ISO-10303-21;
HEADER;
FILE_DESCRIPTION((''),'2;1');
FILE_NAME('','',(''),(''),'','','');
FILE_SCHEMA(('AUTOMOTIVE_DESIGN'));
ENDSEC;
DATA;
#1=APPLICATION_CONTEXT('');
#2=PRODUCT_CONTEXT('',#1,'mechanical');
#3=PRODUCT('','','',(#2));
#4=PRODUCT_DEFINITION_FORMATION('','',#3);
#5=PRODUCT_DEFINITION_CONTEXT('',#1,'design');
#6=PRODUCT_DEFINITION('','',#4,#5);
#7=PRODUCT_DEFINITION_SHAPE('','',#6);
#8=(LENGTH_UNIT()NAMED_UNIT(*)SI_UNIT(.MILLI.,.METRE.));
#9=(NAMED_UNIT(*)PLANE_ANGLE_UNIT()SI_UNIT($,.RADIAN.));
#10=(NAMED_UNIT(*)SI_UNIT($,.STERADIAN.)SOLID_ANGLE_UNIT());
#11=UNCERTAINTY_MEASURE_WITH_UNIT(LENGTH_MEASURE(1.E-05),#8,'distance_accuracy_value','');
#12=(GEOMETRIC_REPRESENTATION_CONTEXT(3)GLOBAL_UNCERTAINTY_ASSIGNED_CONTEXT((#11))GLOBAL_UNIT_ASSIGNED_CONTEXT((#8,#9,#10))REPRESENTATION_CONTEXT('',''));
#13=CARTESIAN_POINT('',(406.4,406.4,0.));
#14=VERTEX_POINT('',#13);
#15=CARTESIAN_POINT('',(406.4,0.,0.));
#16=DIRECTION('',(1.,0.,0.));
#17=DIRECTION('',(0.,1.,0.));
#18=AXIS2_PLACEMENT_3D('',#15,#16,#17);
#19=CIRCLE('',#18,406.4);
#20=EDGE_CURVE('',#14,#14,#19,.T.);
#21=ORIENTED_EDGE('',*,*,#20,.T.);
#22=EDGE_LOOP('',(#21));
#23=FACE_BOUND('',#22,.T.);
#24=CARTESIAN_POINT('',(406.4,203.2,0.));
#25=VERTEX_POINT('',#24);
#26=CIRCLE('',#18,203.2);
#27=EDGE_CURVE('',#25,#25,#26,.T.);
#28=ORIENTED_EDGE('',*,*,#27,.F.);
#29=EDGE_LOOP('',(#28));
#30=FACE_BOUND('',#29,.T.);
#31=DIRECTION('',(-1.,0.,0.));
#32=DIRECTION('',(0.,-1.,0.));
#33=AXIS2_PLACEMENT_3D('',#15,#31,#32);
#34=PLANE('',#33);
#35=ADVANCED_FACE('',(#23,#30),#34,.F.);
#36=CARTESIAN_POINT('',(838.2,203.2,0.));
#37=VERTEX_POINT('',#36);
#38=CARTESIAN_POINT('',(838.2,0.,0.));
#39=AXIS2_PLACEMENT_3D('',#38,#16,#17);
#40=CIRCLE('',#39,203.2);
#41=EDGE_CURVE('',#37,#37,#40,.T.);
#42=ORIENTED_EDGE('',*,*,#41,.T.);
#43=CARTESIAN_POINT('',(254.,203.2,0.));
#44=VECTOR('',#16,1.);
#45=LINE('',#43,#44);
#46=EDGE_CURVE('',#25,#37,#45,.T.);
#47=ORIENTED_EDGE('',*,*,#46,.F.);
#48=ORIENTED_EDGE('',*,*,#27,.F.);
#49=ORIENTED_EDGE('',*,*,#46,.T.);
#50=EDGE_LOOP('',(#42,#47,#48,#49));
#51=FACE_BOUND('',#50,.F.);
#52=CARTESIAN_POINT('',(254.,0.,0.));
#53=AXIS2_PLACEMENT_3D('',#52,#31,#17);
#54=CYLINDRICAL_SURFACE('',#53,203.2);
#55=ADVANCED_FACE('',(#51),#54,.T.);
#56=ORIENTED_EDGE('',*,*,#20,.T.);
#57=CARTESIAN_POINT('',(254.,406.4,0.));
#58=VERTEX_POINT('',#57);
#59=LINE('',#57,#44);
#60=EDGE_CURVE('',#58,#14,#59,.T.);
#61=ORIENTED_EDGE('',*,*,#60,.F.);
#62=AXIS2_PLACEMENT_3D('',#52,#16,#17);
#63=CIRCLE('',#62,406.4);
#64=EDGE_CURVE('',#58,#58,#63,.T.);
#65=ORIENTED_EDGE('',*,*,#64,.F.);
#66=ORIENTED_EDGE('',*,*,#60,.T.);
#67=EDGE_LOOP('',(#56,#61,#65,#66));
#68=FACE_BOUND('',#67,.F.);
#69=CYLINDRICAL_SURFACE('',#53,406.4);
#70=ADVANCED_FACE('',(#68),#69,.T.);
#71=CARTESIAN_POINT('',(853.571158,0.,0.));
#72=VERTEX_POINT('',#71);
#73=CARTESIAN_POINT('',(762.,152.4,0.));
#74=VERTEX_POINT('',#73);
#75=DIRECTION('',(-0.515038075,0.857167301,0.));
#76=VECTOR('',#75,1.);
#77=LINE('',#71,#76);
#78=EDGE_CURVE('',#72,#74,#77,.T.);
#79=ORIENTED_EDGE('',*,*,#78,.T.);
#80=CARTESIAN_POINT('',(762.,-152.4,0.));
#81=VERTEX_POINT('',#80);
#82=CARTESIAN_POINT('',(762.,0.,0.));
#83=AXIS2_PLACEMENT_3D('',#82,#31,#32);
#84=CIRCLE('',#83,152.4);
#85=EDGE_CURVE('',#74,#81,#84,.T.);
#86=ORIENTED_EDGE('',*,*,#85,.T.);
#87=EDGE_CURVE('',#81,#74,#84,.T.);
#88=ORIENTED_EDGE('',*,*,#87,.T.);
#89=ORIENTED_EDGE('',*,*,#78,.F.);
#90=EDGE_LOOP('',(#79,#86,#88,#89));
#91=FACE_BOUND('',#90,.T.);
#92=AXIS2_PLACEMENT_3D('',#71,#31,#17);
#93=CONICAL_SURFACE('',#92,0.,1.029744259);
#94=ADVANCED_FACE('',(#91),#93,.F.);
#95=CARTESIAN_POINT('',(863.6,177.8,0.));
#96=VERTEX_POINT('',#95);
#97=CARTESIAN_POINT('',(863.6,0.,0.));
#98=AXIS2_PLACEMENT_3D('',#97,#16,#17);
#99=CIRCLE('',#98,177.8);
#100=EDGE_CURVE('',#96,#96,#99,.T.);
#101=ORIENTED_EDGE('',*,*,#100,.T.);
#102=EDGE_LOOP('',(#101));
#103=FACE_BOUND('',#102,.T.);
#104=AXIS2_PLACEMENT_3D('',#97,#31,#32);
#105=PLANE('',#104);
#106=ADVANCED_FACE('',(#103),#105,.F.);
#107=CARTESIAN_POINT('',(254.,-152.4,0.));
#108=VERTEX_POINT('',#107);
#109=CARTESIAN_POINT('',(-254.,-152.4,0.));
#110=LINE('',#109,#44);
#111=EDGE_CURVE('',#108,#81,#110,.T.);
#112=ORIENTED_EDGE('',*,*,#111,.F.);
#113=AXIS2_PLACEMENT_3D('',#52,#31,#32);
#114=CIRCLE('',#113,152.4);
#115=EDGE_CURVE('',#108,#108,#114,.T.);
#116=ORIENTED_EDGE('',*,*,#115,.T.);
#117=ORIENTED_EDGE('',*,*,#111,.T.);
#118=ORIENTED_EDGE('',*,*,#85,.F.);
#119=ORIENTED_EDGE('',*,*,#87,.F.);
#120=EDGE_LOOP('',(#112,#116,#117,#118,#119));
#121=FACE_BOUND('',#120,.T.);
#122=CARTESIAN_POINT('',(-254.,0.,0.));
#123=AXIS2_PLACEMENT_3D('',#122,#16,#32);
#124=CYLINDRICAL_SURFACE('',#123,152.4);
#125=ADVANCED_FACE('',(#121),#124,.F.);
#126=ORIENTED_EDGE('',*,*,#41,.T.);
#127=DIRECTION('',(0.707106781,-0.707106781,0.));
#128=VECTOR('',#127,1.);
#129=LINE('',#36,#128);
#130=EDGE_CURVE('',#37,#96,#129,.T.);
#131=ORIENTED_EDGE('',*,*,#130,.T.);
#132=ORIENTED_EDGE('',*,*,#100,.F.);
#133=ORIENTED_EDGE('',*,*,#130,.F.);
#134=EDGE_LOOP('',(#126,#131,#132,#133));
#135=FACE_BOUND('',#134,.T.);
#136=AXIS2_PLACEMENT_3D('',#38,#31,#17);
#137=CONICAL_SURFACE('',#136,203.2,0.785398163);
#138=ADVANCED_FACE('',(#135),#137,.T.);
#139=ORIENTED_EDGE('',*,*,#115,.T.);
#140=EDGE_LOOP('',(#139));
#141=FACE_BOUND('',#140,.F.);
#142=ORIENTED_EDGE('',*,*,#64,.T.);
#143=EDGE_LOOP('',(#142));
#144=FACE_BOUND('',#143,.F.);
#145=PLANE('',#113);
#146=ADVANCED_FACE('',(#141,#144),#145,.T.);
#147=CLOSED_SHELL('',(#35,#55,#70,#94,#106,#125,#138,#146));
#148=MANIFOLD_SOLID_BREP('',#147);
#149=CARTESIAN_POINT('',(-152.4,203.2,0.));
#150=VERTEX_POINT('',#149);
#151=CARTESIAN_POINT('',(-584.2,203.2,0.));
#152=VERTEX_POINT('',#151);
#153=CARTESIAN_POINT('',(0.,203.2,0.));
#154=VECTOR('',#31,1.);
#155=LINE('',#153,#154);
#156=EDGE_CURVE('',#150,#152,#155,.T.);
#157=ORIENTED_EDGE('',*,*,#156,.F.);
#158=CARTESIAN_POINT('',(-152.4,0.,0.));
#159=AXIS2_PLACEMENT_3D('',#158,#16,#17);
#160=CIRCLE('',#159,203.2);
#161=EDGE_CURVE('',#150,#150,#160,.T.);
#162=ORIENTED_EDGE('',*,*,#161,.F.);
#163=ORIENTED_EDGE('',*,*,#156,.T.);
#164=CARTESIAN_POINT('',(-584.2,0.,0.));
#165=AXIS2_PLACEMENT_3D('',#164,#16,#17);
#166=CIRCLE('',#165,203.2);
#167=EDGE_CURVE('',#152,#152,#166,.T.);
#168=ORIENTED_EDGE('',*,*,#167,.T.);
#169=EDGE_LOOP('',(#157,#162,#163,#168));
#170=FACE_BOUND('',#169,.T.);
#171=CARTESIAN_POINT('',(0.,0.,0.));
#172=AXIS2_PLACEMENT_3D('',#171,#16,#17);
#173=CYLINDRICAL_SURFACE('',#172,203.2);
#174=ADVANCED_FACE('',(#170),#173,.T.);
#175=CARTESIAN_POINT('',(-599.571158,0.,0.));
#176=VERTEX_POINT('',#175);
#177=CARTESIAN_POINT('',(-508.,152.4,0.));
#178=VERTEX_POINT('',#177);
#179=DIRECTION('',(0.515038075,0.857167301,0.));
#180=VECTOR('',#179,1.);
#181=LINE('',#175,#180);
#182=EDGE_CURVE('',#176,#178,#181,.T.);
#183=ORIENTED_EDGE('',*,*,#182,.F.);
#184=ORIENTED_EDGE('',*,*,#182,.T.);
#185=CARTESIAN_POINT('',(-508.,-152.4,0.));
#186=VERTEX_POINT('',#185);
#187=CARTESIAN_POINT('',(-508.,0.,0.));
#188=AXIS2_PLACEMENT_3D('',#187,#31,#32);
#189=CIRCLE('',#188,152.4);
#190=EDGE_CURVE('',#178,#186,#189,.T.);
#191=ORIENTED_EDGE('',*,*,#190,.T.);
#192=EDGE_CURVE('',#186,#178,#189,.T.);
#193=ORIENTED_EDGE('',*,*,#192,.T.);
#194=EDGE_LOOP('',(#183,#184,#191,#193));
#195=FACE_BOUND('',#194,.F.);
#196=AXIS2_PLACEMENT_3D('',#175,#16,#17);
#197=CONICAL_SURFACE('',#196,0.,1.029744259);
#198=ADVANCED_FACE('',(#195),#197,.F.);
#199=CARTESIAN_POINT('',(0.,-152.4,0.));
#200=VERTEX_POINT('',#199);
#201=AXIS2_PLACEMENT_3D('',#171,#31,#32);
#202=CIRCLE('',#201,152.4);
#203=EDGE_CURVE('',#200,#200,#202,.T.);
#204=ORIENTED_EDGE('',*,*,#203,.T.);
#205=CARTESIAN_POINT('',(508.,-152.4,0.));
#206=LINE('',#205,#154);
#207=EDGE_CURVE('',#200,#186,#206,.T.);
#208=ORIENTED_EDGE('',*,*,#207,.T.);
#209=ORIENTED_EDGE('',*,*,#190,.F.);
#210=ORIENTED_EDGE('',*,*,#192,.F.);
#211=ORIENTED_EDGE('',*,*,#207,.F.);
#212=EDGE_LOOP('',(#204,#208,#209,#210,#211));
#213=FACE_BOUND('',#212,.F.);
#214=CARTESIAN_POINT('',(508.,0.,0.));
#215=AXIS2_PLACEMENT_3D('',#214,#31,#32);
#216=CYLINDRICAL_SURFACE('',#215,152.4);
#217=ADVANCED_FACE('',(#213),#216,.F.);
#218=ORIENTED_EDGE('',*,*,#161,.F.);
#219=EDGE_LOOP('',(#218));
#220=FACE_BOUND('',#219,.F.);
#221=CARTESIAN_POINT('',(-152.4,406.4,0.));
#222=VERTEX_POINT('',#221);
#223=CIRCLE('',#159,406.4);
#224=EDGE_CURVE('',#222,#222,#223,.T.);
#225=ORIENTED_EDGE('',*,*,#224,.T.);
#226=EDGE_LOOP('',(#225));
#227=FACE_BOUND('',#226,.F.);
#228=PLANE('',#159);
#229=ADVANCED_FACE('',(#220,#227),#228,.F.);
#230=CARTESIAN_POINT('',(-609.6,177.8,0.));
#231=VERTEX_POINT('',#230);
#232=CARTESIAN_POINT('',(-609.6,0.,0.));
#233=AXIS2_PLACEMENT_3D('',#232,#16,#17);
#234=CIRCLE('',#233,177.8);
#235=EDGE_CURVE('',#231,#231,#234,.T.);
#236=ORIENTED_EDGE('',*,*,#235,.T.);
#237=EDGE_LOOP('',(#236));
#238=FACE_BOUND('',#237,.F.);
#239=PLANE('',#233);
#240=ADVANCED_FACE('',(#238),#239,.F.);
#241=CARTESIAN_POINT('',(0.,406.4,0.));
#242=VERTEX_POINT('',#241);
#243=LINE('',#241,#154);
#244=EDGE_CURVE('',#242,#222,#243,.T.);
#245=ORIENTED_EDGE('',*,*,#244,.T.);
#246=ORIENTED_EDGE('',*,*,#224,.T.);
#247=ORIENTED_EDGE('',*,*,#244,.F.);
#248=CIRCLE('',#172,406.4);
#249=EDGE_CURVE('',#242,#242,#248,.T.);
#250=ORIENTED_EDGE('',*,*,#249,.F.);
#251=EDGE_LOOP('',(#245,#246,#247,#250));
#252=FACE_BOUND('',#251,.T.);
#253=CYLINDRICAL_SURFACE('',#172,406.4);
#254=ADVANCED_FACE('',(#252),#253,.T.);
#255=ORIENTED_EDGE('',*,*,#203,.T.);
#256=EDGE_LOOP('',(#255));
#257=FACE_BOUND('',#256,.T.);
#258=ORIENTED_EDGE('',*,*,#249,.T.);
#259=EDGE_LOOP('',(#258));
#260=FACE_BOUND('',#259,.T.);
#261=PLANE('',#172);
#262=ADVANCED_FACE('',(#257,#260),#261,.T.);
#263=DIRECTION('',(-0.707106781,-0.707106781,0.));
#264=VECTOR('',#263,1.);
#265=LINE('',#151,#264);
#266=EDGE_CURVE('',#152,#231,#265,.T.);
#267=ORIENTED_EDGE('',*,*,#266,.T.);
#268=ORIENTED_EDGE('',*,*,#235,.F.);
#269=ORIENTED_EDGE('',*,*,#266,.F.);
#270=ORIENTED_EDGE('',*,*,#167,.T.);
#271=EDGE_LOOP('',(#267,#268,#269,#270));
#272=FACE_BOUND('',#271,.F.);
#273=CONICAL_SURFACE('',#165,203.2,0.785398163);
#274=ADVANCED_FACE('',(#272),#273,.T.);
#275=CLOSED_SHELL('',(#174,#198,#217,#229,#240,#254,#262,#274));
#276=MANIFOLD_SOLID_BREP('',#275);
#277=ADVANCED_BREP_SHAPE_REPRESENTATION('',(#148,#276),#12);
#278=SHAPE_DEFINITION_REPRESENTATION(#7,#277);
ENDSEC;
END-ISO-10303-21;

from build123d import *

# Parameters (mm, degrees)
F0_R     = 203.2
F1_DEPTH = 609.6
F3_D     = 304.8
F3_DEPTH = 508
F3_TIP   = 91.5711583398
F0_R_2   = 406.4
F4_DEPTH = 152.4
F5_SIZE2 = 25.4
F5_SIZE  = 25.4


# Not quite as in the source:
# - a feature names something its author has since deleted; it is built from what else it names


with BuildPart() as f1:
    # F0 (on Right) → F1 (new body)
    with BuildSketch(Plane.YZ):
        Circle(F0_R)
    extrude(amount=-F1_DEPTH)

    # F3
    with Locations(Plane.YZ):
        with Locations((0, 0)):
            Hole(F3_D / 2, depth=F3_DEPTH)
            with Locations((0, 0, -(F3_DEPTH + F3_TIP / 2))):  # 118° drill point
                Cone(0, F3_D / 2, F3_TIP, mode=Mode.SUBTRACT)

    # F0 (on Right) → F4 (join)
    with BuildSketch(Plane.YZ):
        Circle(F0_R_2)
        Circle(F0_R, mode=Mode.SUBTRACT)
    extrude(amount=-F4_DEPTH)

    # F5
    f5_edges = [f1.edges().sort_by_distance(p)[0] for p in [
        (-609.6, -203.2, 0),
    ]]
    chamfer(f5_edges, length=F5_SIZE, length2=F5_SIZE2)


with BuildPart() as f7_1:
    # F7: instance of F1
    add(f1.part.mirror(Plane.YZ.offset(127)))


solid = Compound([f1.part, f7_1.part])
